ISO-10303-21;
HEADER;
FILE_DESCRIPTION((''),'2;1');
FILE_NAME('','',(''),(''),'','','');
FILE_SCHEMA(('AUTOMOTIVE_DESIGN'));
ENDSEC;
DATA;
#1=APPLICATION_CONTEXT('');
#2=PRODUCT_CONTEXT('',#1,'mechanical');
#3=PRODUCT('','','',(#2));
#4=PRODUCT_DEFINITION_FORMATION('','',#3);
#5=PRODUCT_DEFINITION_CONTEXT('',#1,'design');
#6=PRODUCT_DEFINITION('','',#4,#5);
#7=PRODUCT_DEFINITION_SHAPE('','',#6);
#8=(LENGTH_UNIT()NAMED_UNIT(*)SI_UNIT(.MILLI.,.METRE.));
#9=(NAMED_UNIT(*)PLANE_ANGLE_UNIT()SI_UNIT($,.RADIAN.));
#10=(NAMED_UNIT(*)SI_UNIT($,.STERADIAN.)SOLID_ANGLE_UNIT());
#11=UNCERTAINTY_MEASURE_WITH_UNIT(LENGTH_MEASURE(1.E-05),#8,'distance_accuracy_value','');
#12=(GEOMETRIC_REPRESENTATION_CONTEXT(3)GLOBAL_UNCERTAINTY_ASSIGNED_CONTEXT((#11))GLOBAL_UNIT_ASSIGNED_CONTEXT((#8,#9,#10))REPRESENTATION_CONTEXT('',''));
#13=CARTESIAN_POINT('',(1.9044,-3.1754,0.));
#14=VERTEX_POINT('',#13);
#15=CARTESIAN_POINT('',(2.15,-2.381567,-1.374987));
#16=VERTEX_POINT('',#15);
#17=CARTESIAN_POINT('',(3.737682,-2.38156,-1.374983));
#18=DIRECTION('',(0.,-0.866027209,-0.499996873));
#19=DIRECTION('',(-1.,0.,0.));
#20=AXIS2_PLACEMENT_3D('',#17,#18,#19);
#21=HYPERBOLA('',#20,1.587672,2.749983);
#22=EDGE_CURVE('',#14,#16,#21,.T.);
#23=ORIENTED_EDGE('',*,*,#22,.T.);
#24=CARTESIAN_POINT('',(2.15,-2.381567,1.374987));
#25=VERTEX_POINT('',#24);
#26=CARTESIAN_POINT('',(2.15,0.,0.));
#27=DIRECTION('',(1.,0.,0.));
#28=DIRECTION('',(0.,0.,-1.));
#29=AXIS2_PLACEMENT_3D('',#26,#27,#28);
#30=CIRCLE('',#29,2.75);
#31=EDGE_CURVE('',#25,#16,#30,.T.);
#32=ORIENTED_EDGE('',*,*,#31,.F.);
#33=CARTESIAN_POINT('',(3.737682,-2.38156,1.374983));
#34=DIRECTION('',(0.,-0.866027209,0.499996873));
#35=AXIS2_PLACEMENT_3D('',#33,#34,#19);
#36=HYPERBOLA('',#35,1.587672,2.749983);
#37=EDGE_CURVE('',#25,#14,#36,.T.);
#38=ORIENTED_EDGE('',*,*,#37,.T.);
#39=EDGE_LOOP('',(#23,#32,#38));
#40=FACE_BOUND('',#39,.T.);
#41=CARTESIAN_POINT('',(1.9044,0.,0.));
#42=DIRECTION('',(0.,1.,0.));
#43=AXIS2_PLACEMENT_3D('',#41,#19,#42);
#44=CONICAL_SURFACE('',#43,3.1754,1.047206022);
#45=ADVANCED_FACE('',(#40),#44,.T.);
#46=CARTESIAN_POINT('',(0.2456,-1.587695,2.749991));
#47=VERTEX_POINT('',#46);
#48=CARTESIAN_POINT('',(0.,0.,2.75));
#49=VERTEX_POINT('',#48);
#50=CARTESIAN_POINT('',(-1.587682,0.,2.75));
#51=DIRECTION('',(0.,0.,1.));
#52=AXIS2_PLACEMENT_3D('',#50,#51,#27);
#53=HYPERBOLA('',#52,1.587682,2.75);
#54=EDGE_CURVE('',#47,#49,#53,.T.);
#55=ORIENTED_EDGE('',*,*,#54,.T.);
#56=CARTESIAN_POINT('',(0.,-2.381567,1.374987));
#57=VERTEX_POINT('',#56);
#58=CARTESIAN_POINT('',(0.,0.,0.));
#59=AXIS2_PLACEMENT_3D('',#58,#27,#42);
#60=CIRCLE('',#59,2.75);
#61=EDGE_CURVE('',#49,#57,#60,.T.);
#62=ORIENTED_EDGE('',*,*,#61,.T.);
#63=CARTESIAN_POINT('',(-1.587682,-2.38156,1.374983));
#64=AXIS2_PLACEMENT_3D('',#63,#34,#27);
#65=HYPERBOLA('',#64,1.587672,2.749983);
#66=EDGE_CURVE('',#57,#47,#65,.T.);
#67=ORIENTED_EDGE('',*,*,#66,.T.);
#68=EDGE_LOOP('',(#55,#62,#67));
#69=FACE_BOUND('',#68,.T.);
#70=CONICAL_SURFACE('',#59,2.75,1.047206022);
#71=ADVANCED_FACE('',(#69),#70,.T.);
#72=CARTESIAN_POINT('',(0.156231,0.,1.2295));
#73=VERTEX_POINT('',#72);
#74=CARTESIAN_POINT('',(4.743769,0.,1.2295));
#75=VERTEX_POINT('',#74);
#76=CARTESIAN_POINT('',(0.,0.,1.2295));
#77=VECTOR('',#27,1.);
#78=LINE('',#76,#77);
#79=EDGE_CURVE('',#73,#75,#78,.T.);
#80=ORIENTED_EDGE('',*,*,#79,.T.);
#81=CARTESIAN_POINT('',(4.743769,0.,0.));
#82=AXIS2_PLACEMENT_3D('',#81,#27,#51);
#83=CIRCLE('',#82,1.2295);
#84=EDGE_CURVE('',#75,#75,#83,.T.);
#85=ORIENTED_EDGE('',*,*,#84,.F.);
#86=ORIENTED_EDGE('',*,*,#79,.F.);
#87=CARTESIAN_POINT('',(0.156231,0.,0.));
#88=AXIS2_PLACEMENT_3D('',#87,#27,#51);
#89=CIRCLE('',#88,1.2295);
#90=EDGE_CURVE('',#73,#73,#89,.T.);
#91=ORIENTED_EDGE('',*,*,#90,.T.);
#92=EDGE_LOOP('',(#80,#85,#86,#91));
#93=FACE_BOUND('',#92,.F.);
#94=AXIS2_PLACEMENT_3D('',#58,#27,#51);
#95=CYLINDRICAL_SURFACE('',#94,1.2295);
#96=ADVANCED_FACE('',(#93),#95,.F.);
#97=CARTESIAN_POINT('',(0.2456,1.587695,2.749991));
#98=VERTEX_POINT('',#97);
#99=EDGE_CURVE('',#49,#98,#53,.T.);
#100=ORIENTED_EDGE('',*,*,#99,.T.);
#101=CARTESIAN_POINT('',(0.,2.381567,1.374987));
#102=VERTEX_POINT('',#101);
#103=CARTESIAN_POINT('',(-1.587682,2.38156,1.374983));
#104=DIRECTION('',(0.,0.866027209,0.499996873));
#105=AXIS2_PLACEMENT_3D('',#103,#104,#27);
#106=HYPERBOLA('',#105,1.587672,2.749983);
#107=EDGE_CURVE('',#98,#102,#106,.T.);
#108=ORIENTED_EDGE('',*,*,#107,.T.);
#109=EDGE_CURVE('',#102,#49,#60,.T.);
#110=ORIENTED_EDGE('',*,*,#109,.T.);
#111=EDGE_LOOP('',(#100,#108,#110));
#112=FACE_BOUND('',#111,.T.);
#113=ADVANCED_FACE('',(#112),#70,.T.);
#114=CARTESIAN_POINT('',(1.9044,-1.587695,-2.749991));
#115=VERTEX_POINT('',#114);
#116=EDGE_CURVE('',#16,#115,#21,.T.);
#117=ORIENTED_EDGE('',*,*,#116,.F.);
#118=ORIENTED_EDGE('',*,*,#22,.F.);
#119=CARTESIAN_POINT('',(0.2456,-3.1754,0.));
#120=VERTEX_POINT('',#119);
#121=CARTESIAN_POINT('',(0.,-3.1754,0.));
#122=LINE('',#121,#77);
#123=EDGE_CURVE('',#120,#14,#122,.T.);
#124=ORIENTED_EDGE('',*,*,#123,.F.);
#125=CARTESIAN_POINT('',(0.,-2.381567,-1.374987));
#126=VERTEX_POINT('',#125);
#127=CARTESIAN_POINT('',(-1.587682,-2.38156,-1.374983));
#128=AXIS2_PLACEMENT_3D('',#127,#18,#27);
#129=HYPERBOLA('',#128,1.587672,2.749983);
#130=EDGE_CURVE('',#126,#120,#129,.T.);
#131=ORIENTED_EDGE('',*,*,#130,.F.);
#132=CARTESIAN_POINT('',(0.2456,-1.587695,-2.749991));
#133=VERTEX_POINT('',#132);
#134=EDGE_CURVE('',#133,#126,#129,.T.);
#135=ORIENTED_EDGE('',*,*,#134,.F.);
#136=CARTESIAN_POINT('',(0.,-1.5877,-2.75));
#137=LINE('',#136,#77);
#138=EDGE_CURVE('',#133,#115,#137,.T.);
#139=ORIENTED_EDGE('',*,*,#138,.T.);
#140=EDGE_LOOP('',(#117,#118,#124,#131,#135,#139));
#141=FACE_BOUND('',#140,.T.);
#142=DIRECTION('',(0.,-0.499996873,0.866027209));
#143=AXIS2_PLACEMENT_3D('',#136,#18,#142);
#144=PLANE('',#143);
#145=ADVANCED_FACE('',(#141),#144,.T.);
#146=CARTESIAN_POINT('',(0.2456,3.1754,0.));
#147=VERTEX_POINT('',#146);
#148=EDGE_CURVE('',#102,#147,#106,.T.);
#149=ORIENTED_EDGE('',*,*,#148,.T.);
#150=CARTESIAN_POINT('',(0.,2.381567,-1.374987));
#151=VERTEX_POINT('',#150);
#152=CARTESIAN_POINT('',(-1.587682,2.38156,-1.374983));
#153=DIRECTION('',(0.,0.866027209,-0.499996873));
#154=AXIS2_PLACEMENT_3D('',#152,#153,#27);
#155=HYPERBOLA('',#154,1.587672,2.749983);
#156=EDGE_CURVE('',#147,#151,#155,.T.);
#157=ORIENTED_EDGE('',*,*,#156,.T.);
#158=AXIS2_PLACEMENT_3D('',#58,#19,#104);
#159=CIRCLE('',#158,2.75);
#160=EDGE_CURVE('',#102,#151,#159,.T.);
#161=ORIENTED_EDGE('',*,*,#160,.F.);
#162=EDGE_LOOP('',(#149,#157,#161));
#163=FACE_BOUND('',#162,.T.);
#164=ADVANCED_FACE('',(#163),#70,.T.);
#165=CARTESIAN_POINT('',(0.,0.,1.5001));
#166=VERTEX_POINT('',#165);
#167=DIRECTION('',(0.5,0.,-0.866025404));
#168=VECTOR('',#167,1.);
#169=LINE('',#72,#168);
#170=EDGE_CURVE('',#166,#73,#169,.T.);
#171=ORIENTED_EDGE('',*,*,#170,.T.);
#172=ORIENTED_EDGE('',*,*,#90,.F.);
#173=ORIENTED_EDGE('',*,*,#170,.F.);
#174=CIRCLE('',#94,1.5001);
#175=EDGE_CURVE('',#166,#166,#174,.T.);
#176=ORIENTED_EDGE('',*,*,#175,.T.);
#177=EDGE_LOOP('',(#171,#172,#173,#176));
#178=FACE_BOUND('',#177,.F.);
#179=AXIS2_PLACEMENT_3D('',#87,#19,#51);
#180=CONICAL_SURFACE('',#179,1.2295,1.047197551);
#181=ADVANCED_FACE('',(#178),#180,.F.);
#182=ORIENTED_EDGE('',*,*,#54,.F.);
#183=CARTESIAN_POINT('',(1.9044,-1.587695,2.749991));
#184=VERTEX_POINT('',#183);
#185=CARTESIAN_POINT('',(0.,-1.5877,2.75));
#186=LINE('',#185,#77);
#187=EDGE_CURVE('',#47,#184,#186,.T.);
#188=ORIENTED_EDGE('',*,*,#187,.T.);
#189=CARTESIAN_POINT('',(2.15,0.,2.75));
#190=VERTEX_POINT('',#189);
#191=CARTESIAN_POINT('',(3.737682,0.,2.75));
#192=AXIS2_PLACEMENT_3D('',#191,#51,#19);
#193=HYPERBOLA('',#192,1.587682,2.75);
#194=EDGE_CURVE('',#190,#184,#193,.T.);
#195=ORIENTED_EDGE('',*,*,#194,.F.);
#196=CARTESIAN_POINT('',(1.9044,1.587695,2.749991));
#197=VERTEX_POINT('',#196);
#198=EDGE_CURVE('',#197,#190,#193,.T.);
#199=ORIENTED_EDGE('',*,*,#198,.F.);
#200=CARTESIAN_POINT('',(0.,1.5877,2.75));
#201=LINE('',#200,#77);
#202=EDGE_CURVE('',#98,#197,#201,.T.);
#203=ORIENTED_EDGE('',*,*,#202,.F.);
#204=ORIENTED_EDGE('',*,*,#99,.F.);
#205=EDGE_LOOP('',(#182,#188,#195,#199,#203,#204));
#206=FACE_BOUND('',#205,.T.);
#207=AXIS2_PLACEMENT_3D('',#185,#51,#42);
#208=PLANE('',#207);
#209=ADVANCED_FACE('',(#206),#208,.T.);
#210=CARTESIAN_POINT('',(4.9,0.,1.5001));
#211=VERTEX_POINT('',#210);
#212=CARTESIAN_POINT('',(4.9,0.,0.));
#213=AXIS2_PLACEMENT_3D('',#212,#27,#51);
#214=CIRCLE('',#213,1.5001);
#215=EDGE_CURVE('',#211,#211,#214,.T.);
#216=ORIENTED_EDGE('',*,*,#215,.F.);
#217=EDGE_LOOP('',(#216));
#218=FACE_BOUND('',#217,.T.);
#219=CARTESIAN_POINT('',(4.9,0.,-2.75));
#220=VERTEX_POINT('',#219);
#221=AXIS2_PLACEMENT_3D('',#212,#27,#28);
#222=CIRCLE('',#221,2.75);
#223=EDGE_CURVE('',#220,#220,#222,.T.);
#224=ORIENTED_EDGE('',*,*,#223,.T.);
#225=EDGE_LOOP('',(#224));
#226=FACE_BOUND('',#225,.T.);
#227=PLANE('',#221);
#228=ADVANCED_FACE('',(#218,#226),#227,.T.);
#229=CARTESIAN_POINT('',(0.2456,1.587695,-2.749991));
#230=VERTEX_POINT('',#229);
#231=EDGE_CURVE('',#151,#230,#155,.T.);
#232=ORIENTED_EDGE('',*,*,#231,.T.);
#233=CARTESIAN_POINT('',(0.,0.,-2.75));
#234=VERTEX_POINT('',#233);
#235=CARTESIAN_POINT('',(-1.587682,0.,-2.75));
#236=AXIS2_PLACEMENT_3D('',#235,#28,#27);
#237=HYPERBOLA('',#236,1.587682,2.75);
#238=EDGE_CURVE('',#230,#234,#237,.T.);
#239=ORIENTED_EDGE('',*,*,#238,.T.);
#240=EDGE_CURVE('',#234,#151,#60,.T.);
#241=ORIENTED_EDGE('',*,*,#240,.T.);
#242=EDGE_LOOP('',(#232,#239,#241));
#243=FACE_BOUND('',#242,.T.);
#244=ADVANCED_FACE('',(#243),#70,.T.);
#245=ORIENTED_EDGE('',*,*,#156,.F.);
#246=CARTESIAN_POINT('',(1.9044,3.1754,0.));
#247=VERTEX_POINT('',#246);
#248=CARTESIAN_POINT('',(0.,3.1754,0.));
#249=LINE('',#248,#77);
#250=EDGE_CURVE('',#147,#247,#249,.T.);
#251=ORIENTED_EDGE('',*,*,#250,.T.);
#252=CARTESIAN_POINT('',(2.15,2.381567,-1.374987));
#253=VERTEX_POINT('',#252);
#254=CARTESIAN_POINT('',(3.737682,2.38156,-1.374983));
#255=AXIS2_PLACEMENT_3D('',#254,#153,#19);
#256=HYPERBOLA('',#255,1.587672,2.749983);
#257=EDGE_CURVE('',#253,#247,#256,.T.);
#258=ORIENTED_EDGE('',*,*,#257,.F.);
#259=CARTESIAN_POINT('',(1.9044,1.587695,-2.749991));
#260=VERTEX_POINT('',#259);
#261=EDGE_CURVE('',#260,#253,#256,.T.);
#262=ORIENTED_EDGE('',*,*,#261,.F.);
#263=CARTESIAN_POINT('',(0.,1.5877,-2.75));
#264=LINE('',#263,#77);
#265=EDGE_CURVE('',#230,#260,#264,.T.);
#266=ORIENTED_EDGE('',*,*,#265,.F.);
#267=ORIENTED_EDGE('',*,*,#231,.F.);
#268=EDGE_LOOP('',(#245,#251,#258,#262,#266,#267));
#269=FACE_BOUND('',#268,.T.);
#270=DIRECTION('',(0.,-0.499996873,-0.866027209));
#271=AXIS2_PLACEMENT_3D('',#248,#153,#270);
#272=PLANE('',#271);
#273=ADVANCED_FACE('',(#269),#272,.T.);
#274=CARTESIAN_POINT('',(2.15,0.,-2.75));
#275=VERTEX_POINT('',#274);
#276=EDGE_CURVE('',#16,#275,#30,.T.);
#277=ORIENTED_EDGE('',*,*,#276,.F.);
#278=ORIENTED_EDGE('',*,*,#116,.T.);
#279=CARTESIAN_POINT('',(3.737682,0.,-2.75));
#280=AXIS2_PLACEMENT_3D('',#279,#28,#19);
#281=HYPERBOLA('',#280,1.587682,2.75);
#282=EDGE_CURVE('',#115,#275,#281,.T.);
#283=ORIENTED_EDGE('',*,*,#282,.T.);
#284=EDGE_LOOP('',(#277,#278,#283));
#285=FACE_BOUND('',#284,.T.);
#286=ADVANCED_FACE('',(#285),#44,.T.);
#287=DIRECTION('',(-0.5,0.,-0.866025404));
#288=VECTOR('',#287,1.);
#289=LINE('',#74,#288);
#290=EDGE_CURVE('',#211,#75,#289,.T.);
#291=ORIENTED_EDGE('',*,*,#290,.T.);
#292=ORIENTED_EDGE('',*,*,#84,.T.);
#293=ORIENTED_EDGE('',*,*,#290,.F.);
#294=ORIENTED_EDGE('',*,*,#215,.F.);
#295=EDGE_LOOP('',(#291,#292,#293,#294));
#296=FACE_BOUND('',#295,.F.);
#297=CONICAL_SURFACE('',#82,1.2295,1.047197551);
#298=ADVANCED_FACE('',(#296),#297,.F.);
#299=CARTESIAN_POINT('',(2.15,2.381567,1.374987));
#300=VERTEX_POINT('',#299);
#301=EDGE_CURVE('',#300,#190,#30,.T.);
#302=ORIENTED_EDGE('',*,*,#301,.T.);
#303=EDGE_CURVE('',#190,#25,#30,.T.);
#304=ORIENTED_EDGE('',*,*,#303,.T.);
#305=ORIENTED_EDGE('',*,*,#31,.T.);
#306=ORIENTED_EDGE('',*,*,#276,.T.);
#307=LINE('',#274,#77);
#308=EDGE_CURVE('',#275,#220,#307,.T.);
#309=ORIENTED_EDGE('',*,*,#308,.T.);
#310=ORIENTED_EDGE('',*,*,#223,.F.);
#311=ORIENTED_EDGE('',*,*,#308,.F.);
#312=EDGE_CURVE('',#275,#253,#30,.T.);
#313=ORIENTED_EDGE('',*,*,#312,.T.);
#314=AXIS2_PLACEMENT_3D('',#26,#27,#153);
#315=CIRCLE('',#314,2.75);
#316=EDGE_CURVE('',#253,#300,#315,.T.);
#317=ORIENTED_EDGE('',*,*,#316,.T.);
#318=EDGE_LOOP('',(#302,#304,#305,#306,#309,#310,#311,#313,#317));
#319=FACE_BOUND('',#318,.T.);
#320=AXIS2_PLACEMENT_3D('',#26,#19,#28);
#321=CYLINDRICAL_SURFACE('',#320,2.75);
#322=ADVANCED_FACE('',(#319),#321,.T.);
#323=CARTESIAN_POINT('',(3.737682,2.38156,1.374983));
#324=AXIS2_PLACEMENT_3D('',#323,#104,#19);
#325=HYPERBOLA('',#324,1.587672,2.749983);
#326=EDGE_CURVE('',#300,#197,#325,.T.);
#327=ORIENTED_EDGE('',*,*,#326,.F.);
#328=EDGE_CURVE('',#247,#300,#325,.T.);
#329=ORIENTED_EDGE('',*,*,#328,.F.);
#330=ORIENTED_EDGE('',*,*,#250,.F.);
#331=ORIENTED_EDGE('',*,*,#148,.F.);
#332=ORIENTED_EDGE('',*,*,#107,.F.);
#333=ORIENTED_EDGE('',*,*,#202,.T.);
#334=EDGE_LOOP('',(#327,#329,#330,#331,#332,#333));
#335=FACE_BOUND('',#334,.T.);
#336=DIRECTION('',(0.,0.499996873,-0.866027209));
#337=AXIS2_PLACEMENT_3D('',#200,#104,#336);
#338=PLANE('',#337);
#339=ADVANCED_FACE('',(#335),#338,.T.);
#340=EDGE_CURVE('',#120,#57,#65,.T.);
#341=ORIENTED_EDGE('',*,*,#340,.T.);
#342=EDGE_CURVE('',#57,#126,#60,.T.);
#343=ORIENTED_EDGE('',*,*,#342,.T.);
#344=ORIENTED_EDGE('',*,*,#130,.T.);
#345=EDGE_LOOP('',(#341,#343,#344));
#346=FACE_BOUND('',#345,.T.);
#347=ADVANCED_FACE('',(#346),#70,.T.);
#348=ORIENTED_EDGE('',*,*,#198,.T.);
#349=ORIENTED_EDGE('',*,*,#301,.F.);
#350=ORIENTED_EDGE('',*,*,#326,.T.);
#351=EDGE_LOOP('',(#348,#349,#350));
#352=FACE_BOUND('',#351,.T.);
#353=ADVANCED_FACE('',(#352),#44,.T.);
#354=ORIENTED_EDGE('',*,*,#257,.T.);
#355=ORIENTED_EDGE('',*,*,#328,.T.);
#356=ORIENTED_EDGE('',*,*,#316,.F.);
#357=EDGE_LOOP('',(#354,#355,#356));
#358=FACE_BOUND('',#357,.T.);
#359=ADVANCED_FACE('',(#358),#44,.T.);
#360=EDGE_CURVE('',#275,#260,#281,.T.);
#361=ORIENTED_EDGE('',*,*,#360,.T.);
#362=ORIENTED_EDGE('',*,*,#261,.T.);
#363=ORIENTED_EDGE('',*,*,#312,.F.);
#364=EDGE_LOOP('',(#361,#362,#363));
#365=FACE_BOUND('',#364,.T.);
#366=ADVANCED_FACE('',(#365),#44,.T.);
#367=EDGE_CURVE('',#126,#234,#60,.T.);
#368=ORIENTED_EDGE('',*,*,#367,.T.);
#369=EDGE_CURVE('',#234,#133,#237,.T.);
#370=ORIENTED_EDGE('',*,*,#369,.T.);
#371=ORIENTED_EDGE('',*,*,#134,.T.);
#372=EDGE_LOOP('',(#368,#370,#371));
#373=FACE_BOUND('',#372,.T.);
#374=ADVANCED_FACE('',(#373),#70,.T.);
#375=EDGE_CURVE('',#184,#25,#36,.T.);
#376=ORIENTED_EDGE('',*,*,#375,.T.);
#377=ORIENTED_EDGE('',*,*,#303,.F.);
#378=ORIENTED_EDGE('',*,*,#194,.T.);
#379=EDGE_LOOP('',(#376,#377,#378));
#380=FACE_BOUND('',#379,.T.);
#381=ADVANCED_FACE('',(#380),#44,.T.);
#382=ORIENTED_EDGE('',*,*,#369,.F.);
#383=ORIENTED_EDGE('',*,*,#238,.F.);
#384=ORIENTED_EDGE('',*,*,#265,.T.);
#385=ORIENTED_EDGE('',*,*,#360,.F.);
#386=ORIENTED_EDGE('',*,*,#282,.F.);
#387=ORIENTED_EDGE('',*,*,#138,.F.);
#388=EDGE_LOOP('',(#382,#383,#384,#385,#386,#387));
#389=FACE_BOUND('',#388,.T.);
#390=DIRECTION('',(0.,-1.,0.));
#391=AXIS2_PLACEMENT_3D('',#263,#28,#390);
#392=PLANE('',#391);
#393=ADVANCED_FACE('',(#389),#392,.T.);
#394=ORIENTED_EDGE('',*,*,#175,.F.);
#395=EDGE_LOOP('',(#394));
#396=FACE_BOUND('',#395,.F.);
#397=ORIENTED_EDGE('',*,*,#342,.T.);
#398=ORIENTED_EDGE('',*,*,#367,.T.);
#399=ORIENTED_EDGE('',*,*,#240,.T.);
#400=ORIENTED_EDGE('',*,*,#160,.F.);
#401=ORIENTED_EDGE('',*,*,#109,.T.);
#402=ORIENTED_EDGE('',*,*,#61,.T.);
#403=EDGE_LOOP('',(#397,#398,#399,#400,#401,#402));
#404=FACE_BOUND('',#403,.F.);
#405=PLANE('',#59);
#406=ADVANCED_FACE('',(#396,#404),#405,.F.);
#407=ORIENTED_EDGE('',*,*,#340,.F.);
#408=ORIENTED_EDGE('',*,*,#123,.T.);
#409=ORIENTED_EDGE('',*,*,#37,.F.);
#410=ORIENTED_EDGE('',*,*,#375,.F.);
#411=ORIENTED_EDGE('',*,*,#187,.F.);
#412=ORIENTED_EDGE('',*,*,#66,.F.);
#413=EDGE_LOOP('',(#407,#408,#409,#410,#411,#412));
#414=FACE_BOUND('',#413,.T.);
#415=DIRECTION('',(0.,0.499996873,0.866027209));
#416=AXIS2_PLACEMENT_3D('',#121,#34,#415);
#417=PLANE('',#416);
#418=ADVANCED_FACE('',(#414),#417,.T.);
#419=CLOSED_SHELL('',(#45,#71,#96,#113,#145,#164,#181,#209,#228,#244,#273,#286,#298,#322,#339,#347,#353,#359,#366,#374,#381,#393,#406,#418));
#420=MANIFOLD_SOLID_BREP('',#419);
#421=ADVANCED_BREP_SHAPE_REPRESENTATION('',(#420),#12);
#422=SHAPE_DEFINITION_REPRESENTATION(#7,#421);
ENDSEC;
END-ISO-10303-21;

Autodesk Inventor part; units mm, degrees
ref_plane "YZ Plane" through (0, 0, 0) normal (1, 0, 0) x (0, 1, 0)
ref_plane "XZ Plane" through (0, 0, 0) normal (0, 1, 0) x (-1, 0, 0)
sketch "Sketch1" plane through (0, 0, 0) normal (1, 0, 0) x (0, 1, 0)
  line L0 (1.5877, -2.75) -> (-1.5877, -2.75)
  line L1 (-1.5877, -2.75) -> (-3.1754, 0)
  line L2 (-3.1754, 0) -> (-1.5877, 2.75)
  line L3 (-1.5877, 2.75) -> (1.5877, 2.75)
  line L4 (1.5877, 2.75) -> (3.1754, 0)
  line L5 (3.1754, 0) -> (1.5877, -2.75)
  point P0 (0, 0)
  point P1 (0, 0)
  dimension "d0" = 6.3509
extrude "Body" add sketch "Sketch1" along normal blind 2.15
sketch "Sketch2" plane through (2.15, 0, 0) normal (1, 0, 0) x (0, 0, -1)
  circle A0 centre (0, 0) radius 2.75
  dimension "d7" = 5.5
extrude "Ring" add sketch "Sketch2" along normal blind 2.75
sketch "Sketch3" plane through (0, 0, 0) normal (0, 0, 1) x (1, 0, 0)
  line L0 (0, 1.5877) -> (0, 3.1754) projected
  line L1 (0, 3.1754) -> (2.15, 3.1754) projected
  line L2 (2.15, 1.5877) -> (2.15, 3.1754) projected
  line L3 (-0.43, 0) -> (2.58, 0) projected
  line L4 (0, 2.75) -> (0.2456, 3.1754)
  line L5 (1.9044, 3.1754) -> (2.15, 2.75)
  dimension "d3" = 30
  dimension "d4" = 30
  dimension "d5" = 5.5
  dimension "d6" = 5.5
revolve "Chamfer1" cut sketch "Sketch3" angle 360 about axis through (-10, 0, 0) along (1, 0, 0)
sketch "Sketch4" plane through (0, 0, 0) normal (-1, 0, 0) x (0, 0, 1)
  line L0 (0, -4.4456) -> (0, 4.4456) projected
  line L1 (-3.85, 0) -> (3.85, 0) projected
  point P0 (0, 0)
hole "Thread" at (0, 0, 0) direction (1, 0, 0) diameter 2.459 end through all thread size "M3x0.5" class "6H" standard "ISO Metric profile"
chamfer "Chamfer2" distance 0.2706 angle 30 1 edges at (0, 0, -1.2295) measured on face at (0, -2.2301, 0.0494)
chamfer "Chamfer3" distance 0.2706 angle 30 1 edges at (4.9, 0, -1.2295) measured on face at (4.9, -0.3175, -2.2046)
ref_plane "Work Plane1" through (9.7259, 0, 0) normal (0, 0, 1) x (-1, 0, 0)
equation "\"d0\" = 1.1547 * SW"
equation "\"d1\" = KOH1"
equation "\"d7\" = SD2"
equation "\"d8\" = KOH - KOH1"
equation "\"d3\" = ANG1"
equation "\"d4\" = ANG2"
equation "\"d5\" = SW0"
equation "\"d6\" = SW01"
equation "\"d10\" = -0.5 * GD1 + 0.5 * NND"
equation "\"d46\" = -0.5 * GD1 + 0.5 * NND"
equation "\"d12\" = -0.5 * GD1 + 0.5 * NND"
equation "\"d47\" = -0.5 * GD1 + 0.5 * NND"
equation "\"ANG1\" = 30deg"
equation "\"ANG2\" = ANG1"
equation "\"NND\" = 3"
equation "\"KOH1\" = 2.15"
equation "\"KOH\" = 4.9"
equation "\"SW\" = 5.5"
equation "\"SW0\" = SW"
equation "\"SW01\" = SW"
equation "\"SD2\" = SW"
equation "\"GUL\" = 0.541266 * PTC"
equation "\"THREADDIA\" = 3"
equation "\"TOA\" = 30deg"
equation "\"PTC\" = 0.5"
equation "\"E0\" = 1.155 * SW"
equation "\"GAL\" = 0.541266 * PTC"
equation "\"GD1\" = 2.458734"
properties part number "NF E 25-409 - M3" material "Steel, Mild"
